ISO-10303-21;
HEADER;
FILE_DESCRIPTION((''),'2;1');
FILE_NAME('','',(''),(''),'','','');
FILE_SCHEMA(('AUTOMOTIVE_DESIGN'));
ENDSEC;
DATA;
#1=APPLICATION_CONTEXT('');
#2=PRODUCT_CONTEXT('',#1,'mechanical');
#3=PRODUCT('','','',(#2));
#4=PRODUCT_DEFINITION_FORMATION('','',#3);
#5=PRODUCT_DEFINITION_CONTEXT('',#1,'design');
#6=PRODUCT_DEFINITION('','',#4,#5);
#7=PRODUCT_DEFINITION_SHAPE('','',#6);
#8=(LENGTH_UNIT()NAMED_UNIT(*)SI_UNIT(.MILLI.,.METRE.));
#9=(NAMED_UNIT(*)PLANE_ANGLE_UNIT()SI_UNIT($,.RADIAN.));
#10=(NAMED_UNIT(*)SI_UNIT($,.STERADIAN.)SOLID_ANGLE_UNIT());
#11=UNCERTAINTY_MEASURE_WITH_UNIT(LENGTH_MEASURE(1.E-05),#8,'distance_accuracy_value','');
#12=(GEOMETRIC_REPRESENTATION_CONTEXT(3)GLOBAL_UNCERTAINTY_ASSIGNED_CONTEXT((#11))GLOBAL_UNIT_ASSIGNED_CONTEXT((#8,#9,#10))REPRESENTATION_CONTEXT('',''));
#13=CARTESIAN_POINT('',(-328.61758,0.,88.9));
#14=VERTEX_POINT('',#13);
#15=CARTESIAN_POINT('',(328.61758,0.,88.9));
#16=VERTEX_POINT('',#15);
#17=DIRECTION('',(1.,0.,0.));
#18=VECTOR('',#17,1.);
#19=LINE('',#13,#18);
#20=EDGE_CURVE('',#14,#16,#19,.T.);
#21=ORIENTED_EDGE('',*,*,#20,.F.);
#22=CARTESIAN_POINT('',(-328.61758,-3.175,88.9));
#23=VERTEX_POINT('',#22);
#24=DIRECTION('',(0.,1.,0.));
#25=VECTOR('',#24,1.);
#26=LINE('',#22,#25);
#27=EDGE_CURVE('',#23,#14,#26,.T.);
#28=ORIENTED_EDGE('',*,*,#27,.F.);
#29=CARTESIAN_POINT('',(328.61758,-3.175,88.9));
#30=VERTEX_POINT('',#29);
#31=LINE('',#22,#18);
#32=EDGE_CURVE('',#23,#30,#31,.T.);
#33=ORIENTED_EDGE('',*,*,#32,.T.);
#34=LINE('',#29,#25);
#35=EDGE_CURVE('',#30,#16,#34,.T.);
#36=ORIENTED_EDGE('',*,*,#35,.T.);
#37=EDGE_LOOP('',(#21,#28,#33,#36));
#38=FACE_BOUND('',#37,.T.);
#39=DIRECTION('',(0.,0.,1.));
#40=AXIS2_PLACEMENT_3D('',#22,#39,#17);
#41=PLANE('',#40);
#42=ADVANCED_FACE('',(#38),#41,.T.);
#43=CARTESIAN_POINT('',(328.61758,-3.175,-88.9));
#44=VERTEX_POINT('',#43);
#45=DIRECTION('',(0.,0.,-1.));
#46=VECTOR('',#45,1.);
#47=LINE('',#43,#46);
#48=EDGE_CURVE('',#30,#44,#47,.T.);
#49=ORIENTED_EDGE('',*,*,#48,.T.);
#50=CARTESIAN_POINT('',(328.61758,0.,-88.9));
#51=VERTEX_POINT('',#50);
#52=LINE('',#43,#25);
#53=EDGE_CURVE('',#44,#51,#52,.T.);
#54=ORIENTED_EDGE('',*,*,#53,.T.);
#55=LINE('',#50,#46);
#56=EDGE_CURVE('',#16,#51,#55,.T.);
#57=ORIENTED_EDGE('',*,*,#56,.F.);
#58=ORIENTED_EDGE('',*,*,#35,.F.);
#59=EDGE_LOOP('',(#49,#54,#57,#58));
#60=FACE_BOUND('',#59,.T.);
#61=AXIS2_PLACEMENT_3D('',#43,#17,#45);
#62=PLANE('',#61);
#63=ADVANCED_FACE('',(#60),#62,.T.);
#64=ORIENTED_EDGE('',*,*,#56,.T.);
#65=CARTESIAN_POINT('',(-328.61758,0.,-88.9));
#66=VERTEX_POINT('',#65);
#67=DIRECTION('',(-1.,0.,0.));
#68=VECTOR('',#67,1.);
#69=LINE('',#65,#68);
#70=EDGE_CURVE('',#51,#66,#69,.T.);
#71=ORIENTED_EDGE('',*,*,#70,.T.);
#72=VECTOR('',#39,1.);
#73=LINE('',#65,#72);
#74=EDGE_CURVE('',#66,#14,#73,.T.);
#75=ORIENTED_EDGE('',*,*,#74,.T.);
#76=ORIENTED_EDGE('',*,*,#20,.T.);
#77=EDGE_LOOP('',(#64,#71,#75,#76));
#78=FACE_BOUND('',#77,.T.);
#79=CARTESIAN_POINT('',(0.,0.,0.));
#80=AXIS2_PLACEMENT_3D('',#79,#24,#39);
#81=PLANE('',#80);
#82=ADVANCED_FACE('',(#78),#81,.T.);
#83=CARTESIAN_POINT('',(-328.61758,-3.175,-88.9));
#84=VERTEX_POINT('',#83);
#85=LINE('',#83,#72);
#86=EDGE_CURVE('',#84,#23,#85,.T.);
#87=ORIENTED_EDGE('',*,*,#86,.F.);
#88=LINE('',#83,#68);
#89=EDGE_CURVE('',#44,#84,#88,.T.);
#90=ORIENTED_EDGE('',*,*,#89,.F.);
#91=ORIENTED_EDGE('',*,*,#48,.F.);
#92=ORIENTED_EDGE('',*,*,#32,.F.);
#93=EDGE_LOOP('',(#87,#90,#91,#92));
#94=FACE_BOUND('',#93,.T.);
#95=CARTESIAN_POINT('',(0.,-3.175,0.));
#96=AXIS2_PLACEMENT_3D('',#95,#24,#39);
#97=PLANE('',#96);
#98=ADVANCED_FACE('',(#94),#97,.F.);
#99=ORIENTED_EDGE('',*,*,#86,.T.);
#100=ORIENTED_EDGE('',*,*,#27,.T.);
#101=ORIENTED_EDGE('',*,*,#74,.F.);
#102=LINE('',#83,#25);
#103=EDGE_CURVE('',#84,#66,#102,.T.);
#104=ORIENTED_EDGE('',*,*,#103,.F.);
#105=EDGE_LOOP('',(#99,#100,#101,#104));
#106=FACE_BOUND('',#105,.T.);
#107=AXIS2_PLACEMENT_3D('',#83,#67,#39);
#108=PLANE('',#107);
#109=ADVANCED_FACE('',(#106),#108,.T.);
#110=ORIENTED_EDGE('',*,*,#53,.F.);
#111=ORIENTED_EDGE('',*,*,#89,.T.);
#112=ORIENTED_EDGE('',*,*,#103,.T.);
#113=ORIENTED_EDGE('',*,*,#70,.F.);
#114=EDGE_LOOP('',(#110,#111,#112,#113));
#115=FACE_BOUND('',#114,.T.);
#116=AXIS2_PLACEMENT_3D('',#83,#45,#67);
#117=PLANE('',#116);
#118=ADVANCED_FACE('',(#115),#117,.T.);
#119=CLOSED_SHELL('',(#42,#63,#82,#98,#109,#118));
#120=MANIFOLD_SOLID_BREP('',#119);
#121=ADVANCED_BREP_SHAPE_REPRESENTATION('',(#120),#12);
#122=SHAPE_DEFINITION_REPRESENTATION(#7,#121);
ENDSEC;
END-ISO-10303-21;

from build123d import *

# Parameters (mm, degrees)
SKETCH1_W          = 657.23516
SKETCH1_H          = 177.8
BASE_FLANGE1_DEPTH = 3.175


# Sheet-metal steps are written as plain solids
with BuildPart() as part:
    # Sketch1 → Base-Flange1 (new body)
    with BuildSketch(Plane(origin=(0, 0, 0), x_dir=(1, 0, 0), z_dir=(0, 1, 0))):
        Rectangle(SKETCH1_W, SKETCH1_H)
    extrude(amount=-BASE_FLANGE1_DEPTH)


solid = part.part
